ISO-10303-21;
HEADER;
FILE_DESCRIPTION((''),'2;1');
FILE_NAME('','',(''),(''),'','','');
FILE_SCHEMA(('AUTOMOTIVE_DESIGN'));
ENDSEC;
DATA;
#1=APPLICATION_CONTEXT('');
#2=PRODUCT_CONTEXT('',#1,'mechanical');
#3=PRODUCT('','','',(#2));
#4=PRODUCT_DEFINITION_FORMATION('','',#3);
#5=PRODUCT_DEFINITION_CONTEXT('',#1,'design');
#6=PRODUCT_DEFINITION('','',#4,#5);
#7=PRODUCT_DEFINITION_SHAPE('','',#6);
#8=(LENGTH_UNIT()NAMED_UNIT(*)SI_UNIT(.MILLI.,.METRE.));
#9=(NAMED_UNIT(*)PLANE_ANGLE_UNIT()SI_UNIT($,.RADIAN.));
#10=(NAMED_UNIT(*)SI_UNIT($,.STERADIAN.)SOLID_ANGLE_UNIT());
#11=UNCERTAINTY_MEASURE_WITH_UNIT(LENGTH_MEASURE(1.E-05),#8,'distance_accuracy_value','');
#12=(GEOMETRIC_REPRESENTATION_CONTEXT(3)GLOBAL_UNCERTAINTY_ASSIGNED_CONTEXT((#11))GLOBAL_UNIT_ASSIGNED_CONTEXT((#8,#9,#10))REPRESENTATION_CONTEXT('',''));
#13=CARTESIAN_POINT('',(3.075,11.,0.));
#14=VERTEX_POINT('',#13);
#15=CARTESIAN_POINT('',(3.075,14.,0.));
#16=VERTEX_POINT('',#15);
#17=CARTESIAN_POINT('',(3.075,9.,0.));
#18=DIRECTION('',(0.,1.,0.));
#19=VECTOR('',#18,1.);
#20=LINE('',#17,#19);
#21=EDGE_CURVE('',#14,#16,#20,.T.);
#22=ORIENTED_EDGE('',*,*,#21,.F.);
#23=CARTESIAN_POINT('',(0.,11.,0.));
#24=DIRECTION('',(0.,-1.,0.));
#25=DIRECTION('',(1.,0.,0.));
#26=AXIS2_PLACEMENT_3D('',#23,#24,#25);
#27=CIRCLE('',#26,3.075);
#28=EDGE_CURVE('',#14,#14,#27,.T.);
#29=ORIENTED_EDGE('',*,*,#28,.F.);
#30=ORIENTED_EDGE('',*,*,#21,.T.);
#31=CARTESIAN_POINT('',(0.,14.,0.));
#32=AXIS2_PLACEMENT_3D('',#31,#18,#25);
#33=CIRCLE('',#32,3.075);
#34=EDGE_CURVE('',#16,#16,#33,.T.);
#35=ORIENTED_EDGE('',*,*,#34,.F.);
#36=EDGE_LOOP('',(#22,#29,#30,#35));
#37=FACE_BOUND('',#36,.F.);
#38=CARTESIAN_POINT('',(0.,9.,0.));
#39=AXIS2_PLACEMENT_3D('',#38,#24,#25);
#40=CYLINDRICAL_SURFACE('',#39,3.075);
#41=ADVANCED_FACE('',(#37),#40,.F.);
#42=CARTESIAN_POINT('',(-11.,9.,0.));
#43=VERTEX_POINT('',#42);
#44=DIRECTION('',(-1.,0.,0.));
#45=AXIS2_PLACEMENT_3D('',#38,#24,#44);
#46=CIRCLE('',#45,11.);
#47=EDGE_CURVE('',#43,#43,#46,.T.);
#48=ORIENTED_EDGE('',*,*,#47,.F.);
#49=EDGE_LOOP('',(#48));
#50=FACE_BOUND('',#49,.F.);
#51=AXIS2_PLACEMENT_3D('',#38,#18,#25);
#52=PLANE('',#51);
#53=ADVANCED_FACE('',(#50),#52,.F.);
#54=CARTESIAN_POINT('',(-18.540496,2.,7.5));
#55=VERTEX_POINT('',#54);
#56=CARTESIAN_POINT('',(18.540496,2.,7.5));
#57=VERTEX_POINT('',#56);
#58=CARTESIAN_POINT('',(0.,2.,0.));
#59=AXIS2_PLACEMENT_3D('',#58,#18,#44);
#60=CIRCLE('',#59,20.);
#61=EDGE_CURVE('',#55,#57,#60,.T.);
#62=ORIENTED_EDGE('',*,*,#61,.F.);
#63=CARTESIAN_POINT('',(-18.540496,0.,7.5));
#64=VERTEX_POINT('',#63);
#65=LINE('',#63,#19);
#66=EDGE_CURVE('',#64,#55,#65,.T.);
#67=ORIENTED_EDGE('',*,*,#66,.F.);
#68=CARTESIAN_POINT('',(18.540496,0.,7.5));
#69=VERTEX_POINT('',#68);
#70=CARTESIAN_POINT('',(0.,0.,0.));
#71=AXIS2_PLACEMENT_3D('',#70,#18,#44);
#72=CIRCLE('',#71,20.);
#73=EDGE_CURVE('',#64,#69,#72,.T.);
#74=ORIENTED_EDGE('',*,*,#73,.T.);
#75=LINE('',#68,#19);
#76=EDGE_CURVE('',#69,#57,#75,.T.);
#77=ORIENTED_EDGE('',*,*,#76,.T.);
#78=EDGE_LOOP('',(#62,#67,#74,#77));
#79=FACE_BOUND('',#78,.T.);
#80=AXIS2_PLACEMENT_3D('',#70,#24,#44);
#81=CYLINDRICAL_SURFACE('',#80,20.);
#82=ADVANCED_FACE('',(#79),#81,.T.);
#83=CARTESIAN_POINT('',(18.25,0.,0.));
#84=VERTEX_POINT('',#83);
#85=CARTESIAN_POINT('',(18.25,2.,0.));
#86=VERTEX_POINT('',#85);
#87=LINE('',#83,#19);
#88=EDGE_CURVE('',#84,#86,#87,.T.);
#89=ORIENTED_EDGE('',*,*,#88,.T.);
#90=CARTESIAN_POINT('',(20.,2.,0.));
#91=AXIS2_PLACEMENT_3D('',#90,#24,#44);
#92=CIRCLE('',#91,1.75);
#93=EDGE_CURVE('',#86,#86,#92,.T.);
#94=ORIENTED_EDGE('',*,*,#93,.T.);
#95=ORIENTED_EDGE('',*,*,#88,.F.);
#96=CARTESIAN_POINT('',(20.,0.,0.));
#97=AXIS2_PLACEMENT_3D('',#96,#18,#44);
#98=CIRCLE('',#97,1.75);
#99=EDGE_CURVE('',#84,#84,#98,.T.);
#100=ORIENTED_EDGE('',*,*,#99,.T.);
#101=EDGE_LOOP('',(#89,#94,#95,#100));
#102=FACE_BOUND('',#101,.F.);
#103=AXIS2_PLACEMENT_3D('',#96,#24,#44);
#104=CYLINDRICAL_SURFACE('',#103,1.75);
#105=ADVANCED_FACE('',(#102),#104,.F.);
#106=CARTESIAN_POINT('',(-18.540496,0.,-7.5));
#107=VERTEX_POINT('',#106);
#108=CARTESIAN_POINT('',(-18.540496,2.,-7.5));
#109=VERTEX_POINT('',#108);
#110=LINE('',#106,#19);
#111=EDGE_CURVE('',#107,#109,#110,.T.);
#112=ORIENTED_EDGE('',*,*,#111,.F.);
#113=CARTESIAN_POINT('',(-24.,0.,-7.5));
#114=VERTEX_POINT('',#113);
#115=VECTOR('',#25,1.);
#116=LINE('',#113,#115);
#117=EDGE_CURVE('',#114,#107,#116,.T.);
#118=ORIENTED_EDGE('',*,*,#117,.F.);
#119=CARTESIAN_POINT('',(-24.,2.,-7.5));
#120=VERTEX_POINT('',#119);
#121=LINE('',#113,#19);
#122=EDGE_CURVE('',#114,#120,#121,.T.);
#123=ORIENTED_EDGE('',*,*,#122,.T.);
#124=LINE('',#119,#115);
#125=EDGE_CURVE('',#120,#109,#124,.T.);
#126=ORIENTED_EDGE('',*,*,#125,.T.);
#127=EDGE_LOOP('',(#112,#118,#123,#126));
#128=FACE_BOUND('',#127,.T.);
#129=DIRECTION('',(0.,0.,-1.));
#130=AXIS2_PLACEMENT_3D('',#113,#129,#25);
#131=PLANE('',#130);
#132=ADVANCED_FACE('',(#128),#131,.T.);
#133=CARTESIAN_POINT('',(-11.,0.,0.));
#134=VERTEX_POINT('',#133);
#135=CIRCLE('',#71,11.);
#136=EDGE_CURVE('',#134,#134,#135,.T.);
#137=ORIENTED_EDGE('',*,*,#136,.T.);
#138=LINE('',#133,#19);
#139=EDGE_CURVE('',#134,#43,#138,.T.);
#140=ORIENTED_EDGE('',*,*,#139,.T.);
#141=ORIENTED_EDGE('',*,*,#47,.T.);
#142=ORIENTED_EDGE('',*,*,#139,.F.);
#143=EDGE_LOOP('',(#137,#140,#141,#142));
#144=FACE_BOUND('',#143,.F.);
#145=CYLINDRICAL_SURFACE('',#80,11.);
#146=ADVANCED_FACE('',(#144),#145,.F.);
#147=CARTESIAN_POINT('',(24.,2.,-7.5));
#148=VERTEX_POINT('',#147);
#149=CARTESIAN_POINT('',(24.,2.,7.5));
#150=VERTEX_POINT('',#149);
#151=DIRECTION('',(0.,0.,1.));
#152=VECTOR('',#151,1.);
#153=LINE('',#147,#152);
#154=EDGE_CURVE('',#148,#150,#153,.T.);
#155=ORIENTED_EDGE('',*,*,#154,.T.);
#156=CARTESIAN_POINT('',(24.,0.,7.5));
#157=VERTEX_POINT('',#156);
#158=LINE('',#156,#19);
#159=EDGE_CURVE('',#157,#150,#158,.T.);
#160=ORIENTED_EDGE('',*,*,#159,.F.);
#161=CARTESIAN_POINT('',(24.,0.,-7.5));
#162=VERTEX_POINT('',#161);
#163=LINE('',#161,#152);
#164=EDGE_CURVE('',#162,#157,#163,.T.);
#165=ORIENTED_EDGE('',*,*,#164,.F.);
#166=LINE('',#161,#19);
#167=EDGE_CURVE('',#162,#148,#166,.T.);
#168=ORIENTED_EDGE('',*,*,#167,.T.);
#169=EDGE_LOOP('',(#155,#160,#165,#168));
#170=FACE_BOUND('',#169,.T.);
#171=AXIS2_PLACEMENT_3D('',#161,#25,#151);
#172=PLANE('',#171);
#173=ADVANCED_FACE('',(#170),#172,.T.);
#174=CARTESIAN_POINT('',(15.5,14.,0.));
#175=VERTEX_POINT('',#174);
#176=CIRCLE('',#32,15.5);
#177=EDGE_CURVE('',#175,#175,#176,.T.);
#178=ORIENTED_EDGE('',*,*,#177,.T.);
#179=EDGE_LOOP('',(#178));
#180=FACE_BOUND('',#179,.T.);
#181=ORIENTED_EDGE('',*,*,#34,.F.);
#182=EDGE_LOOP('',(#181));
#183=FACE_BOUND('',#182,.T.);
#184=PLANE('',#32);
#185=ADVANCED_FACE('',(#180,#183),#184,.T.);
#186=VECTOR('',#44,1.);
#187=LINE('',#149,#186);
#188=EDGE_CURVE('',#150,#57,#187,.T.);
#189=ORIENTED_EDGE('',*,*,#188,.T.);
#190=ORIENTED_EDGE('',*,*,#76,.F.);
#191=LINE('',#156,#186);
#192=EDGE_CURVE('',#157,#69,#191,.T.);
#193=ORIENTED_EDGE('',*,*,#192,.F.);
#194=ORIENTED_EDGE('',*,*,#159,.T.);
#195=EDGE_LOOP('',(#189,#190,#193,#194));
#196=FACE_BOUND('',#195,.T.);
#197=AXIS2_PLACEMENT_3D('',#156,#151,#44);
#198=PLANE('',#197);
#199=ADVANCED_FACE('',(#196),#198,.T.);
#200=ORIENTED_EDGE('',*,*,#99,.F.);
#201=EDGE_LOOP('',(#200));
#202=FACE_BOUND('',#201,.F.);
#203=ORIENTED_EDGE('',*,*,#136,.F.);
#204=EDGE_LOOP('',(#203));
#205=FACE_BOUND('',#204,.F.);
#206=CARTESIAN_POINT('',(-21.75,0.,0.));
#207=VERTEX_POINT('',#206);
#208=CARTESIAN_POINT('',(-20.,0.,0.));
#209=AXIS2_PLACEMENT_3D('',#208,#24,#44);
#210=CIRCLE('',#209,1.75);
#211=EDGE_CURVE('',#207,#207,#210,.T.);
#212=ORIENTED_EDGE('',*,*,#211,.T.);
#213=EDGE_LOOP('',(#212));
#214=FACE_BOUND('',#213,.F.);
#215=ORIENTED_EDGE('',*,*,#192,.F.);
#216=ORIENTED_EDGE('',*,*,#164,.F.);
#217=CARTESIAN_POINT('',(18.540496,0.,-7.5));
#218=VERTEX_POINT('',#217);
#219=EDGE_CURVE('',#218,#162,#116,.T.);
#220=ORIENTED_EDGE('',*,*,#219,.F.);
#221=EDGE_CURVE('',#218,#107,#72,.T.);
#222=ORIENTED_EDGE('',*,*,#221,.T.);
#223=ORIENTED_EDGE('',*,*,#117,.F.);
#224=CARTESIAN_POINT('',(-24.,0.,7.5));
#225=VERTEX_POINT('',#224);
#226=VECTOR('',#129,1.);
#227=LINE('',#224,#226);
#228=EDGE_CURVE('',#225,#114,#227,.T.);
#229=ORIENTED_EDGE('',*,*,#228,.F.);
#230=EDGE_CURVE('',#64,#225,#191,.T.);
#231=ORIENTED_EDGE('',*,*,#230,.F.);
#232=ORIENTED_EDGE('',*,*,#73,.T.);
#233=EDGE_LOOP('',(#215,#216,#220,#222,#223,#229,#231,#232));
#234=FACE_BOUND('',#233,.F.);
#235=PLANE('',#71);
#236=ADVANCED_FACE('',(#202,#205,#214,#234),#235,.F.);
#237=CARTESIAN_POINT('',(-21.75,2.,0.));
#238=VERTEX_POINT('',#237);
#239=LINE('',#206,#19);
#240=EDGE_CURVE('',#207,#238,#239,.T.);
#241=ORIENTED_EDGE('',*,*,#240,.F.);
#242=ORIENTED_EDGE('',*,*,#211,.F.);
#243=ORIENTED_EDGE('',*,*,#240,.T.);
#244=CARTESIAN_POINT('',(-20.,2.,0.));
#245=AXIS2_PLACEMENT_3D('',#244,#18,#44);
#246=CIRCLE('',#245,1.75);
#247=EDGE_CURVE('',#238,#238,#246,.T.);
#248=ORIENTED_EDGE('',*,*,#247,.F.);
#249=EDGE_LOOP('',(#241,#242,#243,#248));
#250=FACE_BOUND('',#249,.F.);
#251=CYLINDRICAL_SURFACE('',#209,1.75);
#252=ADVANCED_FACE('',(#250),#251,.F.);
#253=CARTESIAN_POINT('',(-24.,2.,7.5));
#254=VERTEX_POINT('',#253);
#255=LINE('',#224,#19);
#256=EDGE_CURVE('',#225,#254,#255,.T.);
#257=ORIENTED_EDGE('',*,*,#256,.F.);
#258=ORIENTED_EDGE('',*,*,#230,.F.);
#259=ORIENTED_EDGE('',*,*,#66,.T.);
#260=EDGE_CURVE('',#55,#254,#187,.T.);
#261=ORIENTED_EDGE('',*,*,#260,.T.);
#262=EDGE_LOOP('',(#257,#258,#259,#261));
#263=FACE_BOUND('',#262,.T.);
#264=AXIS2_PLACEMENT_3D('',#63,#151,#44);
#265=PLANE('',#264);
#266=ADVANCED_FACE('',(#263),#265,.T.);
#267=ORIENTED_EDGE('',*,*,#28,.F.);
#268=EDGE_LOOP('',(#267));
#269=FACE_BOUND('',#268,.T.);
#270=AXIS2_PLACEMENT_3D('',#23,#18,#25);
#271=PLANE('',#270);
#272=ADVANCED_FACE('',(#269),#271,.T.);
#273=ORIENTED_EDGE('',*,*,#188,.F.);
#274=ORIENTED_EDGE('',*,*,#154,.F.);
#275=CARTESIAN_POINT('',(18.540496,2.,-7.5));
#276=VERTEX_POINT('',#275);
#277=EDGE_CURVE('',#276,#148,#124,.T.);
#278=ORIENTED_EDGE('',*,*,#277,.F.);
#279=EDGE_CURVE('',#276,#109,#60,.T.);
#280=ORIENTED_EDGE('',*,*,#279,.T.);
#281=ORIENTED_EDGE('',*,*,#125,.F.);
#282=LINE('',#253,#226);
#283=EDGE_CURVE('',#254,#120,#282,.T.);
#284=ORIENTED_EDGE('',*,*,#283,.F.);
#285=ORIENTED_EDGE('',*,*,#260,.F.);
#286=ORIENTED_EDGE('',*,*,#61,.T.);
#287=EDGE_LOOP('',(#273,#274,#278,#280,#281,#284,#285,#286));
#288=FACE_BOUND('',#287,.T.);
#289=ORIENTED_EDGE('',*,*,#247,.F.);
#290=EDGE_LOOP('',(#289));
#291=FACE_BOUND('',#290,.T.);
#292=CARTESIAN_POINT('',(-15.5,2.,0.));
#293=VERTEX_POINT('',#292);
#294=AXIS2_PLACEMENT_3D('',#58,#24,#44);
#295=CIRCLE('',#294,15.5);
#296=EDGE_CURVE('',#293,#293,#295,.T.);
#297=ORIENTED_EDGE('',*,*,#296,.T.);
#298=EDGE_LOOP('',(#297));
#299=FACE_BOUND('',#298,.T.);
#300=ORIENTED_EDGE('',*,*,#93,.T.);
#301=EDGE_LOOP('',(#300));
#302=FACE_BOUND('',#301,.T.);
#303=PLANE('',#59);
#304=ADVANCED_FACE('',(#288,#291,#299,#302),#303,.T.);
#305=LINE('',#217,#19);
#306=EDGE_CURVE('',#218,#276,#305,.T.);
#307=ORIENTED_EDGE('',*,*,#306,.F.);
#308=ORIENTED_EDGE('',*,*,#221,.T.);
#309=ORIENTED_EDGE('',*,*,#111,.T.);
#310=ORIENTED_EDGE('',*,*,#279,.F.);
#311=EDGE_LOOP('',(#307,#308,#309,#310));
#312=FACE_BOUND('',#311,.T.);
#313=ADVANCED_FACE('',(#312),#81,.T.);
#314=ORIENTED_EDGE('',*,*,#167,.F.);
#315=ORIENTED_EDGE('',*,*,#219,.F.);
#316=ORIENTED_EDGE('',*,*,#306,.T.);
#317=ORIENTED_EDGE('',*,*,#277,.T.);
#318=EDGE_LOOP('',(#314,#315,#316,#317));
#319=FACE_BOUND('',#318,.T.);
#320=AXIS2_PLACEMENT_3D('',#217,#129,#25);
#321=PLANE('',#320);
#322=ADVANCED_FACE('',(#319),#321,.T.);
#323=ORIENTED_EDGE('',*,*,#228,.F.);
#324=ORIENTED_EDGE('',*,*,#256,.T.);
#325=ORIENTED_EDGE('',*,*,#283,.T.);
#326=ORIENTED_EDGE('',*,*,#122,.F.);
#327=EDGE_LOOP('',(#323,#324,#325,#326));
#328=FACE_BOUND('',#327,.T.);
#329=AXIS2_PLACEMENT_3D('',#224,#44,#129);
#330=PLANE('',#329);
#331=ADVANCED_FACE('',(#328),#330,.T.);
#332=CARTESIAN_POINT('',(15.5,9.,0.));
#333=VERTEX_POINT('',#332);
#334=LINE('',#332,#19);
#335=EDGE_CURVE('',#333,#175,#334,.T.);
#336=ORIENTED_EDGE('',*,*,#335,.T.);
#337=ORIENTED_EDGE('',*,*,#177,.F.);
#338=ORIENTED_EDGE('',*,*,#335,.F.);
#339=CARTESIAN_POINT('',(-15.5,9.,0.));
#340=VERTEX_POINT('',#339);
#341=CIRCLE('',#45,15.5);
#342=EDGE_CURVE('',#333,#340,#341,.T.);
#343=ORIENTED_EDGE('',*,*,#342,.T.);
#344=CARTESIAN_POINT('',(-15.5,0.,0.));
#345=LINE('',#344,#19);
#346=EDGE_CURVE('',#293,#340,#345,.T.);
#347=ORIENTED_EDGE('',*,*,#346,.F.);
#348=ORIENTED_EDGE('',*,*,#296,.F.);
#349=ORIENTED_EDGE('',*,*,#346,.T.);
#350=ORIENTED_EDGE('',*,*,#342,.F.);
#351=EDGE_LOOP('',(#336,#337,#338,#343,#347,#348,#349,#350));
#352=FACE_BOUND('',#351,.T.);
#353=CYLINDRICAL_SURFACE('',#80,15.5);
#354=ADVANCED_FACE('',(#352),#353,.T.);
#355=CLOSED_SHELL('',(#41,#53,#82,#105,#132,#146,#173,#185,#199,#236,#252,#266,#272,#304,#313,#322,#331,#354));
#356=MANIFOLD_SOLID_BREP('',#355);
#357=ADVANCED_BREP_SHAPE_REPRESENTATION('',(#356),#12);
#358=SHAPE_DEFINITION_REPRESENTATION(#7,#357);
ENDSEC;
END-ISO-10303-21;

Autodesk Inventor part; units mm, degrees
ref_plane "YZ Plane" through (0, 0, 0) normal (1, 0, 0) x (0, 1, 0)
ref_plane "XZ Plane" through (0, 0, 0) normal (0, 1, 0) x (-1, 0, 0)
ref_plane "XY Plane" through (0, 0, 0) normal (0, 0, 1) x (1, 0, 0)
sketch "Sketch1" plane through (0, 0, 0) normal (0, 1, 0) x (-1, 0, 0)
  circle A0 centre (0, 0) radius 1.5
  circle A1 centre (0, 0) radius 20
  line L0 (24, -7.5) -> (-24, -7.5)
  line L1 (-24, -7.5) -> (-24, 7.5)
  line L2 (-24, 7.5) -> (24, 7.5)
  line L3 (24, 7.5) -> (24, -7.5)
  line L4 (24, -7.5) -> (-24, 7.5) construction
  line L5 (-24, -7.5) -> (24, 7.5) construction
  circle A2 centre (0, 0) radius 11
  circle A3 centre (20, 0) radius 1.75
  circle A4 centre (-20, 0) radius 1.75
  circle A5 centre (0, 0) radius 15.5
  point P0 (-18.5405, -7.5)
  point P1 (18.5405, -7.5)
  point P2 (18.5405, 7.5)
  point P3 (-18.5405, 7.5)
  dimension "d0" = 40
  dimension "d1" = 48
  dimension "d2" = 15
  dimension "d3" = 22
  dimension "d4" = 3.5
  dimension "d5" = 3.5
  dimension "d6" = 31
extrude "Extrusion1" add sketch "Sketch1" along normal blind 2 contours A3 A1 L0 A5 L2 | A1 L2 L3 L0 A3 | L2 A5 A1 | A1 L0 A5 | L2 A5 L0 A1 A4 | A1 A4 L0 L1 L2
extrude "Extrusion2" add sketch "Sketch1" along normal blind 9 contours A5 L0 A2 L2 | L2 A2 A5 | A5 L0 A2 | L2 A2 L0 A5
sketch "Sketch2" plane through (0, 9, 0) normal (0, 1, 0) x (1, 0, 0)
  circle A0 centre (0, 0) radius 15.5
  circle A1 centre (0, 0) radius 8.3846
  circle A2 centre (0, 0) radius 3.075
  dimension "d11" = 31
  dimension "d12" = 6.15
extrude "Extrusion3" add sketch "Sketch2" along normal blind 5 contours A0 | A1
extrude "Extrusion4" add sketch "Sketch2" along normal blind 2 contours A1 | A2
properties part number "magnetholder"
